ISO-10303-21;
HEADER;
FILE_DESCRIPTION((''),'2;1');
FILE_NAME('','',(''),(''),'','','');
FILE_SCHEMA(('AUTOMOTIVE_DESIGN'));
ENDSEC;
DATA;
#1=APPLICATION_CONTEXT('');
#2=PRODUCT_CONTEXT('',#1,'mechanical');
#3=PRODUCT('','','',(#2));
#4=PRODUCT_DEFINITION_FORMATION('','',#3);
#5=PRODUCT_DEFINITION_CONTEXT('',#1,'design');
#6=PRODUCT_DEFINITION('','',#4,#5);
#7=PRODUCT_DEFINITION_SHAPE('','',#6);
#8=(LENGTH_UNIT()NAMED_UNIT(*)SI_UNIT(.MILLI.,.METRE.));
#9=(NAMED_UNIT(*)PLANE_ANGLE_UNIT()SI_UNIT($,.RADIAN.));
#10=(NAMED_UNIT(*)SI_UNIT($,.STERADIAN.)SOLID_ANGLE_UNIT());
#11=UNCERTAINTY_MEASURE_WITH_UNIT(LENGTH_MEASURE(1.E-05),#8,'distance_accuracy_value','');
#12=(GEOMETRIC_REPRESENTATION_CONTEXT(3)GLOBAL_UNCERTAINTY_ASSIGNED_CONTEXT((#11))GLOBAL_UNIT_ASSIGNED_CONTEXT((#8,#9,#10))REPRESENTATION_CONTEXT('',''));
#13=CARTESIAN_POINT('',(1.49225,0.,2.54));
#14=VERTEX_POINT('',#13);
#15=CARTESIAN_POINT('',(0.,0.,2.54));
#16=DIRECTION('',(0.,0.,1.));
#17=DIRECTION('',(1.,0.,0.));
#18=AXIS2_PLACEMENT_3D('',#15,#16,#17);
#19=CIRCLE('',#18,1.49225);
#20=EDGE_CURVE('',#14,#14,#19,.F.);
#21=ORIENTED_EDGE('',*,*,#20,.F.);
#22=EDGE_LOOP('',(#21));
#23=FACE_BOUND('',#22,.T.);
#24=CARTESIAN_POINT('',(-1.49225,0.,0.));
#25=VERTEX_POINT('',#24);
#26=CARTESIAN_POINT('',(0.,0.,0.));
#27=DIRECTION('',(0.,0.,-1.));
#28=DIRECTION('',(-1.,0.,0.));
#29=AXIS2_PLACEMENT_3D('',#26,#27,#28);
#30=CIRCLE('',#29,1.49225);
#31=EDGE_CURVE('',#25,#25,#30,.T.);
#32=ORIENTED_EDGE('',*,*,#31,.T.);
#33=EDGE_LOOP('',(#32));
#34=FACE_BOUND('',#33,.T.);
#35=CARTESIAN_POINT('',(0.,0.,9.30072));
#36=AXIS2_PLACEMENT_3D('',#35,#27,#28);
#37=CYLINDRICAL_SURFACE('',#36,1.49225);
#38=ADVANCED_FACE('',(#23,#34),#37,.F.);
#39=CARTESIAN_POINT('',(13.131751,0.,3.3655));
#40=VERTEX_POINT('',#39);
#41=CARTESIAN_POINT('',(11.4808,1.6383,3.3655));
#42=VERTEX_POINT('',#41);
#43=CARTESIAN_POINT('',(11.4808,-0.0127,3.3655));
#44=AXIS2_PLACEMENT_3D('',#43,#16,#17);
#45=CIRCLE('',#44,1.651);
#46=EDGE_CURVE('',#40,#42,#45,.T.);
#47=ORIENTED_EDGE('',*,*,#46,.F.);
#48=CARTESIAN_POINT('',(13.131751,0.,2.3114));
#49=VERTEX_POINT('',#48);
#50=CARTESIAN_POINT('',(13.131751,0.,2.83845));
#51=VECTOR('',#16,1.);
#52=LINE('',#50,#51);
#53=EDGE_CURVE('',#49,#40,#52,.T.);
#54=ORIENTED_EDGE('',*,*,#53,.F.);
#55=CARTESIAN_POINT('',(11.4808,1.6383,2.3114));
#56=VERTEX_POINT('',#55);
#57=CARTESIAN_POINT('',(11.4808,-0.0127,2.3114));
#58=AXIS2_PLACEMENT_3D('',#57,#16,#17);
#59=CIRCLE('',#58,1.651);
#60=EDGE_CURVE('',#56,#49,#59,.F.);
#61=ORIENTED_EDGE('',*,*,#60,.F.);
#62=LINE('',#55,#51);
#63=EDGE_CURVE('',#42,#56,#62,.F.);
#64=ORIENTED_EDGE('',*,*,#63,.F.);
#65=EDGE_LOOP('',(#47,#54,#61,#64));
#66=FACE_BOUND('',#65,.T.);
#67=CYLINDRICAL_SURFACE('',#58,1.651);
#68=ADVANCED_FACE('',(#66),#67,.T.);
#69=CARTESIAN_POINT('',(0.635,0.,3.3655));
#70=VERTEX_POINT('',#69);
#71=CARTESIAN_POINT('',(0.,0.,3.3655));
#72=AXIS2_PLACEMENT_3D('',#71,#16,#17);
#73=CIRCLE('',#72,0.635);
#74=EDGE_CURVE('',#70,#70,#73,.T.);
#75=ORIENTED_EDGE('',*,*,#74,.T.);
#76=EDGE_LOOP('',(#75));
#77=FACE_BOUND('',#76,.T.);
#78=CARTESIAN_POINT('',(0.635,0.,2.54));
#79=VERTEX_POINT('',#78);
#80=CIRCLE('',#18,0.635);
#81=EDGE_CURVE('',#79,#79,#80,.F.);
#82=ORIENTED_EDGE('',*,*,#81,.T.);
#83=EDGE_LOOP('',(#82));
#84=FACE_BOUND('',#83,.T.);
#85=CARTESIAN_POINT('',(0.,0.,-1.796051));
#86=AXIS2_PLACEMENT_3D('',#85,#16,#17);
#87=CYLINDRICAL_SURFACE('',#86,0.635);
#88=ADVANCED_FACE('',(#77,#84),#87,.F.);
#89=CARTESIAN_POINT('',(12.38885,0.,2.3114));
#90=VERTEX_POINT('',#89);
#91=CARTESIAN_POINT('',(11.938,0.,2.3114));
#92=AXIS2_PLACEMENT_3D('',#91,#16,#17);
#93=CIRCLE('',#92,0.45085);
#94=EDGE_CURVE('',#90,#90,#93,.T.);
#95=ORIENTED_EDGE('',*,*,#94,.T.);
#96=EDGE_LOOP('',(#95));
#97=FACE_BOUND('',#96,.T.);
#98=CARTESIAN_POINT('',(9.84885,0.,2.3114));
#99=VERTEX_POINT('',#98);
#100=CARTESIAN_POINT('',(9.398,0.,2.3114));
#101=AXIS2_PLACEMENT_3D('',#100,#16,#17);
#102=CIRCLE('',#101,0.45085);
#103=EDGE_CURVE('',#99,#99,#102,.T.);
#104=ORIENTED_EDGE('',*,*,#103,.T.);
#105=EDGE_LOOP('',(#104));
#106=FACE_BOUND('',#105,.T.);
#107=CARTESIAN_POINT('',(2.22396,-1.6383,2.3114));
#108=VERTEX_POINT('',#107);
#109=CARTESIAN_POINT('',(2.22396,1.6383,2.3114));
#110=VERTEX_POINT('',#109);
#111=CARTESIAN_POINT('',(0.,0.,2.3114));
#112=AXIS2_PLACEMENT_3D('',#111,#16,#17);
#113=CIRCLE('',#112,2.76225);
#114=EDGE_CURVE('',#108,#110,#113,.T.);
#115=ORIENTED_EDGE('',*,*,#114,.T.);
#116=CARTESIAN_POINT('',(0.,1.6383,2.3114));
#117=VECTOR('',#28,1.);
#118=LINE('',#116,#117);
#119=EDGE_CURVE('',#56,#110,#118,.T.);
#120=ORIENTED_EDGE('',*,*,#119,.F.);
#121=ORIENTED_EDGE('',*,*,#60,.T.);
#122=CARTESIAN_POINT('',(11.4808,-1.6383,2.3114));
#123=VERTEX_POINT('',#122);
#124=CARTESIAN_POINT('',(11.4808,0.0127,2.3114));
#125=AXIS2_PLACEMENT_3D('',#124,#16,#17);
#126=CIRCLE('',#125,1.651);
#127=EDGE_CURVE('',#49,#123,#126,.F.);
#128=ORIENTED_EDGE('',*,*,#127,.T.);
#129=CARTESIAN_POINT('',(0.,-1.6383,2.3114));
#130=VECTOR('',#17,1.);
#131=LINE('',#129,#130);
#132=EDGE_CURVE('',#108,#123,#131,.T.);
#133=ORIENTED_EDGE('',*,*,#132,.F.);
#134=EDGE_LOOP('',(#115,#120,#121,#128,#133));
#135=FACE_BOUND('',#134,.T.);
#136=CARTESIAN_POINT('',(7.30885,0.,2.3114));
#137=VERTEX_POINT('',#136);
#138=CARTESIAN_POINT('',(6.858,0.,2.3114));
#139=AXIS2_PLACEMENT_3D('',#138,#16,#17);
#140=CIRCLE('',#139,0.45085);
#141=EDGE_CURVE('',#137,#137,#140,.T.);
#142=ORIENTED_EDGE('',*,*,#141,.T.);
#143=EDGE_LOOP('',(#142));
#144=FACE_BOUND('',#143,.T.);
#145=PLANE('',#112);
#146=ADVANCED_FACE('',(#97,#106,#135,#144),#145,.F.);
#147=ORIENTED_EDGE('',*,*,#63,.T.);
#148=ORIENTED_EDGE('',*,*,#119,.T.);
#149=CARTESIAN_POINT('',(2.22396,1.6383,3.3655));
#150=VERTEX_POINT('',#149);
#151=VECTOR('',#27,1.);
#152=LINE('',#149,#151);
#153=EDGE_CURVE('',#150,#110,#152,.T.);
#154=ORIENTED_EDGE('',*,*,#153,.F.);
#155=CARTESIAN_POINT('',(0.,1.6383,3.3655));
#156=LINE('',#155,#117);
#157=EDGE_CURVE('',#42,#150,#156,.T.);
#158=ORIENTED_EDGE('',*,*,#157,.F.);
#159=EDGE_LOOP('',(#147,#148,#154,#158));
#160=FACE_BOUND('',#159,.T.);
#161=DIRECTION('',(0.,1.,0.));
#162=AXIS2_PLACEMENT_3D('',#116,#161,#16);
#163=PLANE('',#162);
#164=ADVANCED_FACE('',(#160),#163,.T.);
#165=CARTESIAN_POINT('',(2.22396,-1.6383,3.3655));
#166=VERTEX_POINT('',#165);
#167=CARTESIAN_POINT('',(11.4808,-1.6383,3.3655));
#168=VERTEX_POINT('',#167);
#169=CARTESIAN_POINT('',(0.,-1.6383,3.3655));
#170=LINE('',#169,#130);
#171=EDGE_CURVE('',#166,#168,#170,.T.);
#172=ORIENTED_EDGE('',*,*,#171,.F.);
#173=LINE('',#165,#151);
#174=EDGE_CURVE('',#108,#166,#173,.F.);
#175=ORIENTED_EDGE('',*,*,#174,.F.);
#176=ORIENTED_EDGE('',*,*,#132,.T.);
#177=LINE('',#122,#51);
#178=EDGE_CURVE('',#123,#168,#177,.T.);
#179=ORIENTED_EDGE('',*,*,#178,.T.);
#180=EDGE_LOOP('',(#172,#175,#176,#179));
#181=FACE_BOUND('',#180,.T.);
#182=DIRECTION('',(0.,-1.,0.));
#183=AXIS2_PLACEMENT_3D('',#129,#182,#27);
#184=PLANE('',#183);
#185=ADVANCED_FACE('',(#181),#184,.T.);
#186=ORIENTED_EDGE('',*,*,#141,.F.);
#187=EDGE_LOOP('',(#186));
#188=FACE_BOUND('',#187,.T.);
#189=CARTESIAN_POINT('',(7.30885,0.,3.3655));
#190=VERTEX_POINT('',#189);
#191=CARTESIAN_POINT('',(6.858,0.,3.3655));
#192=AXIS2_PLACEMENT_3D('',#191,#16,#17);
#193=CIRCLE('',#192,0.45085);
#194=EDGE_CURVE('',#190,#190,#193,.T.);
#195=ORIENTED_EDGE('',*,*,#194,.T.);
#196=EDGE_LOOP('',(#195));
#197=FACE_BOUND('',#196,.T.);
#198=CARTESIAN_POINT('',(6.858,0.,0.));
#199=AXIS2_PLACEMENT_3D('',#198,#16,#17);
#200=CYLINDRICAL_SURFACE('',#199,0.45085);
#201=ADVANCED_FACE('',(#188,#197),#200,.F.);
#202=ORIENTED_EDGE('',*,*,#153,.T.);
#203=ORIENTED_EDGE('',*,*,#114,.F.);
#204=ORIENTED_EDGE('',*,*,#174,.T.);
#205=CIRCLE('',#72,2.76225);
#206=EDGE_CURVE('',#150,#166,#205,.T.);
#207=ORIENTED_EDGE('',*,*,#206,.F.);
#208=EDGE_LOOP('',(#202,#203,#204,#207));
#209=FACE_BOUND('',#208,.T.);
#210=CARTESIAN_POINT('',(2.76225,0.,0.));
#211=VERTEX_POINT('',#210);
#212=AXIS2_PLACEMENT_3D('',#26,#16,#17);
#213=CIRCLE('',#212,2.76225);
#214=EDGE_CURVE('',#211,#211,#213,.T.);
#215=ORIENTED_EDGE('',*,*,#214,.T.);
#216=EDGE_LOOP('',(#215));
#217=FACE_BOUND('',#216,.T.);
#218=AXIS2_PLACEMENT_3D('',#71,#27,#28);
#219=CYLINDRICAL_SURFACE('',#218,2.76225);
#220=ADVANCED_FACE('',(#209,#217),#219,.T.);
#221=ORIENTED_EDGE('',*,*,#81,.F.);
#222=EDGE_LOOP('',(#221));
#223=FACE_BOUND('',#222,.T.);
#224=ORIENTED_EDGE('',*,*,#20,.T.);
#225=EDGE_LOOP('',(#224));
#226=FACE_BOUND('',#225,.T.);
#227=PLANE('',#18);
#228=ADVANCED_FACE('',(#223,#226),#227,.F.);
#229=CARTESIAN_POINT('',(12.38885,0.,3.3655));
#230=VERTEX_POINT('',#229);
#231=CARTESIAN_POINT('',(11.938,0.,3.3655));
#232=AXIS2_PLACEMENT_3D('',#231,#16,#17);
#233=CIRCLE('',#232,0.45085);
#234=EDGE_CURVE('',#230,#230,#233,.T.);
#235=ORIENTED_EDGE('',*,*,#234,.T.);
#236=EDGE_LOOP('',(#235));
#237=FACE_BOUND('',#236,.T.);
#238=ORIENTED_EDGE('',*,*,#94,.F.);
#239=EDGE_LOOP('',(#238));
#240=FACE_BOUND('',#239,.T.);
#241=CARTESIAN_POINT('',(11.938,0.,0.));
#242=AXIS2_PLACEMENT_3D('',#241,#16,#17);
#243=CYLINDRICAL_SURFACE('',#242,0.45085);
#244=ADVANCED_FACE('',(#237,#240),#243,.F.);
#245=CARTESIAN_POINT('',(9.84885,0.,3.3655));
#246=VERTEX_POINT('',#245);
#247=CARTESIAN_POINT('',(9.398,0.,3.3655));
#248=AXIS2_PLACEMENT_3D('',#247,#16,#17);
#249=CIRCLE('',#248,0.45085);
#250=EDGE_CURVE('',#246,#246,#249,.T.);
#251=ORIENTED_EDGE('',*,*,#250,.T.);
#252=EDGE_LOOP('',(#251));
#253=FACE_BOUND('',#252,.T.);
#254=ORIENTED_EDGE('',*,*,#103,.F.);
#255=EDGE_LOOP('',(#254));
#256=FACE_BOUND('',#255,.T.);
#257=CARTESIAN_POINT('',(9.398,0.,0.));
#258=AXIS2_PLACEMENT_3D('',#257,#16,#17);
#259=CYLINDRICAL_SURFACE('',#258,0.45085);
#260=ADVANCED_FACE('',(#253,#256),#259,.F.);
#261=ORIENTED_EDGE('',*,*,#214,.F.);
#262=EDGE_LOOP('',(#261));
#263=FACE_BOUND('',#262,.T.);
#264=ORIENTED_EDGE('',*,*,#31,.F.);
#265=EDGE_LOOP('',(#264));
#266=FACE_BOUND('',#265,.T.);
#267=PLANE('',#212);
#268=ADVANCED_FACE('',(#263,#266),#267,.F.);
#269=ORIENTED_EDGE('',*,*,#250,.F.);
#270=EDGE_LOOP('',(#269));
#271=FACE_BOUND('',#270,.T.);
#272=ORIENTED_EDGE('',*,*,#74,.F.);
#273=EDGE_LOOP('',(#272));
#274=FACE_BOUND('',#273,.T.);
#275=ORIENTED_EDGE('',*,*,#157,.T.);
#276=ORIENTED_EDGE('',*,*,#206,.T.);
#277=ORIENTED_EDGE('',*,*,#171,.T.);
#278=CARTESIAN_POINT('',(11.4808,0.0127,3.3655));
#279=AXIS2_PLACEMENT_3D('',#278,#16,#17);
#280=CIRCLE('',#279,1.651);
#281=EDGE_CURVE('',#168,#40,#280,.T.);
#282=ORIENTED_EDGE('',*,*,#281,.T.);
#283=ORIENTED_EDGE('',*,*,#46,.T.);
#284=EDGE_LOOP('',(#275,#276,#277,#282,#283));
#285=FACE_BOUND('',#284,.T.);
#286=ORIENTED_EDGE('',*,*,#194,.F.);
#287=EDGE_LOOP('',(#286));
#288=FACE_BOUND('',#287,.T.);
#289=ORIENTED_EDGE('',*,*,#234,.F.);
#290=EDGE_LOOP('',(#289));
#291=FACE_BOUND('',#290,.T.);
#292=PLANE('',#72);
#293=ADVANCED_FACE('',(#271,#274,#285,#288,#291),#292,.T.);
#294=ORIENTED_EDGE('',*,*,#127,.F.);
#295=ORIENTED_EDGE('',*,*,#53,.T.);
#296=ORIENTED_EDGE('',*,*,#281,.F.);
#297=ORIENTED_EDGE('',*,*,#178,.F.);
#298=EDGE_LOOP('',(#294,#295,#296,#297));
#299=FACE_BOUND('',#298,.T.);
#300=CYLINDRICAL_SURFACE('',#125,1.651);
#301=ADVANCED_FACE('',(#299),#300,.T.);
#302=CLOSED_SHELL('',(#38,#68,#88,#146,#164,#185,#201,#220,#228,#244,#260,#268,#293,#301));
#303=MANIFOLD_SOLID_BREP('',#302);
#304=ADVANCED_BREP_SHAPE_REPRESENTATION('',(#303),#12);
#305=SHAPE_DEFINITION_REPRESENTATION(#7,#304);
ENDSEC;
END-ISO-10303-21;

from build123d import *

# Parameters (mm, degrees)
SKETCH1_R           = 2.76225
BOSS_EXTRUDE1_DEPTH = 3.3655
SKETCH2_W           = 13.1318
SKETCH2_H           = 3.2766
BOSS_EXTRUDE2_DEPTH = 1.0541
FILLET1_R           = 1.651
SKETCH3_R           = 0.635
CUT_EXTRUDE1_DEPTH  = 3.3655
SKETCH4_R           = 1.49225
CUT_EXTRUDE2_DEPTH  = 2.54
SKETCH5_R           = 0.45085
CUT_EXTRUDE3_DEPTH  = 14.834720946


with BuildPart() as part:
    # Sketch1 → Boss-Extrude1 (new body)
    with BuildSketch(Plane.XY):
        Circle(SKETCH1_R)
    extrude(amount=BOSS_EXTRUDE1_DEPTH)

    # Sketch2 → Boss-Extrude2 (add)
    with BuildSketch(Plane.XY.offset(3.3655)):
        with Locations((6.5659, 0)):
            Rectangle(SKETCH2_W, SKETCH2_H)
    extrude(amount=-BOSS_EXTRUDE2_DEPTH)

    # Fillet1
    # the kernel refuses this fillet: 1.651 mm, written as the material it takes off along each edge
    with BuildSketch(Plane(origin=(13.1318, -1.6383, 7.493), x_dir=(-1, 0, 0), z_dir=(0, 0, -1))) as fillet1_piece_1:
        with BuildLine():
            CenterArc((FILLET1_R, FILLET1_R), FILLET1_R, 180, 90)
            Line((0, FILLET1_R), (0, 0))
            Line((0, 0), (FILLET1_R, 0))
        make_face()
    extrude(amount=9.3091, mode=Mode.SUBTRACT)
    with BuildSketch(Plane(origin=(13.1318, 1.6383, 7.493), x_dir=(-1, 0, 0), z_dir=(0, 0, -1))) as fillet1_piece_2:
        with BuildLine():
            CenterArc((FILLET1_R, -FILLET1_R), FILLET1_R, 90, 90)
            Line((0, -FILLET1_R), (0, 0))
            Line((0, 0), (FILLET1_R, 0))
        make_face()
    extrude(amount=9.3091, mode=Mode.SUBTRACT)

    # Sketch3 → Cut-Extrude1 (cut)
    with BuildSketch(Plane.XY.offset(3.3655)):
        Circle(SKETCH3_R)
    extrude(amount=-CUT_EXTRUDE1_DEPTH, mode=Mode.SUBTRACT)

    # Sketch4 → Cut-Extrude2 (cut)
    with BuildSketch(Plane(origin=(0, 0, 0), x_dir=(-1, 0, 0), z_dir=(0, 0, -1))):
        Circle(SKETCH4_R)
    extrude(amount=-CUT_EXTRUDE2_DEPTH, mode=Mode.SUBTRACT)

    # Sketch5 → Cut-Extrude3 (cut, through all)
    with BuildSketch(Plane.XY.offset(3.3655)):
        with Locations((6.858, 0)):
            Circle(SKETCH5_R)
        with Locations((9.398, 0)):
            Circle(SKETCH5_R)
        with Locations((11.938, 0)):
            Circle(SKETCH5_R)
    extrude(amount=-CUT_EXTRUDE3_DEPTH, mode=Mode.SUBTRACT)


solid = part.part
